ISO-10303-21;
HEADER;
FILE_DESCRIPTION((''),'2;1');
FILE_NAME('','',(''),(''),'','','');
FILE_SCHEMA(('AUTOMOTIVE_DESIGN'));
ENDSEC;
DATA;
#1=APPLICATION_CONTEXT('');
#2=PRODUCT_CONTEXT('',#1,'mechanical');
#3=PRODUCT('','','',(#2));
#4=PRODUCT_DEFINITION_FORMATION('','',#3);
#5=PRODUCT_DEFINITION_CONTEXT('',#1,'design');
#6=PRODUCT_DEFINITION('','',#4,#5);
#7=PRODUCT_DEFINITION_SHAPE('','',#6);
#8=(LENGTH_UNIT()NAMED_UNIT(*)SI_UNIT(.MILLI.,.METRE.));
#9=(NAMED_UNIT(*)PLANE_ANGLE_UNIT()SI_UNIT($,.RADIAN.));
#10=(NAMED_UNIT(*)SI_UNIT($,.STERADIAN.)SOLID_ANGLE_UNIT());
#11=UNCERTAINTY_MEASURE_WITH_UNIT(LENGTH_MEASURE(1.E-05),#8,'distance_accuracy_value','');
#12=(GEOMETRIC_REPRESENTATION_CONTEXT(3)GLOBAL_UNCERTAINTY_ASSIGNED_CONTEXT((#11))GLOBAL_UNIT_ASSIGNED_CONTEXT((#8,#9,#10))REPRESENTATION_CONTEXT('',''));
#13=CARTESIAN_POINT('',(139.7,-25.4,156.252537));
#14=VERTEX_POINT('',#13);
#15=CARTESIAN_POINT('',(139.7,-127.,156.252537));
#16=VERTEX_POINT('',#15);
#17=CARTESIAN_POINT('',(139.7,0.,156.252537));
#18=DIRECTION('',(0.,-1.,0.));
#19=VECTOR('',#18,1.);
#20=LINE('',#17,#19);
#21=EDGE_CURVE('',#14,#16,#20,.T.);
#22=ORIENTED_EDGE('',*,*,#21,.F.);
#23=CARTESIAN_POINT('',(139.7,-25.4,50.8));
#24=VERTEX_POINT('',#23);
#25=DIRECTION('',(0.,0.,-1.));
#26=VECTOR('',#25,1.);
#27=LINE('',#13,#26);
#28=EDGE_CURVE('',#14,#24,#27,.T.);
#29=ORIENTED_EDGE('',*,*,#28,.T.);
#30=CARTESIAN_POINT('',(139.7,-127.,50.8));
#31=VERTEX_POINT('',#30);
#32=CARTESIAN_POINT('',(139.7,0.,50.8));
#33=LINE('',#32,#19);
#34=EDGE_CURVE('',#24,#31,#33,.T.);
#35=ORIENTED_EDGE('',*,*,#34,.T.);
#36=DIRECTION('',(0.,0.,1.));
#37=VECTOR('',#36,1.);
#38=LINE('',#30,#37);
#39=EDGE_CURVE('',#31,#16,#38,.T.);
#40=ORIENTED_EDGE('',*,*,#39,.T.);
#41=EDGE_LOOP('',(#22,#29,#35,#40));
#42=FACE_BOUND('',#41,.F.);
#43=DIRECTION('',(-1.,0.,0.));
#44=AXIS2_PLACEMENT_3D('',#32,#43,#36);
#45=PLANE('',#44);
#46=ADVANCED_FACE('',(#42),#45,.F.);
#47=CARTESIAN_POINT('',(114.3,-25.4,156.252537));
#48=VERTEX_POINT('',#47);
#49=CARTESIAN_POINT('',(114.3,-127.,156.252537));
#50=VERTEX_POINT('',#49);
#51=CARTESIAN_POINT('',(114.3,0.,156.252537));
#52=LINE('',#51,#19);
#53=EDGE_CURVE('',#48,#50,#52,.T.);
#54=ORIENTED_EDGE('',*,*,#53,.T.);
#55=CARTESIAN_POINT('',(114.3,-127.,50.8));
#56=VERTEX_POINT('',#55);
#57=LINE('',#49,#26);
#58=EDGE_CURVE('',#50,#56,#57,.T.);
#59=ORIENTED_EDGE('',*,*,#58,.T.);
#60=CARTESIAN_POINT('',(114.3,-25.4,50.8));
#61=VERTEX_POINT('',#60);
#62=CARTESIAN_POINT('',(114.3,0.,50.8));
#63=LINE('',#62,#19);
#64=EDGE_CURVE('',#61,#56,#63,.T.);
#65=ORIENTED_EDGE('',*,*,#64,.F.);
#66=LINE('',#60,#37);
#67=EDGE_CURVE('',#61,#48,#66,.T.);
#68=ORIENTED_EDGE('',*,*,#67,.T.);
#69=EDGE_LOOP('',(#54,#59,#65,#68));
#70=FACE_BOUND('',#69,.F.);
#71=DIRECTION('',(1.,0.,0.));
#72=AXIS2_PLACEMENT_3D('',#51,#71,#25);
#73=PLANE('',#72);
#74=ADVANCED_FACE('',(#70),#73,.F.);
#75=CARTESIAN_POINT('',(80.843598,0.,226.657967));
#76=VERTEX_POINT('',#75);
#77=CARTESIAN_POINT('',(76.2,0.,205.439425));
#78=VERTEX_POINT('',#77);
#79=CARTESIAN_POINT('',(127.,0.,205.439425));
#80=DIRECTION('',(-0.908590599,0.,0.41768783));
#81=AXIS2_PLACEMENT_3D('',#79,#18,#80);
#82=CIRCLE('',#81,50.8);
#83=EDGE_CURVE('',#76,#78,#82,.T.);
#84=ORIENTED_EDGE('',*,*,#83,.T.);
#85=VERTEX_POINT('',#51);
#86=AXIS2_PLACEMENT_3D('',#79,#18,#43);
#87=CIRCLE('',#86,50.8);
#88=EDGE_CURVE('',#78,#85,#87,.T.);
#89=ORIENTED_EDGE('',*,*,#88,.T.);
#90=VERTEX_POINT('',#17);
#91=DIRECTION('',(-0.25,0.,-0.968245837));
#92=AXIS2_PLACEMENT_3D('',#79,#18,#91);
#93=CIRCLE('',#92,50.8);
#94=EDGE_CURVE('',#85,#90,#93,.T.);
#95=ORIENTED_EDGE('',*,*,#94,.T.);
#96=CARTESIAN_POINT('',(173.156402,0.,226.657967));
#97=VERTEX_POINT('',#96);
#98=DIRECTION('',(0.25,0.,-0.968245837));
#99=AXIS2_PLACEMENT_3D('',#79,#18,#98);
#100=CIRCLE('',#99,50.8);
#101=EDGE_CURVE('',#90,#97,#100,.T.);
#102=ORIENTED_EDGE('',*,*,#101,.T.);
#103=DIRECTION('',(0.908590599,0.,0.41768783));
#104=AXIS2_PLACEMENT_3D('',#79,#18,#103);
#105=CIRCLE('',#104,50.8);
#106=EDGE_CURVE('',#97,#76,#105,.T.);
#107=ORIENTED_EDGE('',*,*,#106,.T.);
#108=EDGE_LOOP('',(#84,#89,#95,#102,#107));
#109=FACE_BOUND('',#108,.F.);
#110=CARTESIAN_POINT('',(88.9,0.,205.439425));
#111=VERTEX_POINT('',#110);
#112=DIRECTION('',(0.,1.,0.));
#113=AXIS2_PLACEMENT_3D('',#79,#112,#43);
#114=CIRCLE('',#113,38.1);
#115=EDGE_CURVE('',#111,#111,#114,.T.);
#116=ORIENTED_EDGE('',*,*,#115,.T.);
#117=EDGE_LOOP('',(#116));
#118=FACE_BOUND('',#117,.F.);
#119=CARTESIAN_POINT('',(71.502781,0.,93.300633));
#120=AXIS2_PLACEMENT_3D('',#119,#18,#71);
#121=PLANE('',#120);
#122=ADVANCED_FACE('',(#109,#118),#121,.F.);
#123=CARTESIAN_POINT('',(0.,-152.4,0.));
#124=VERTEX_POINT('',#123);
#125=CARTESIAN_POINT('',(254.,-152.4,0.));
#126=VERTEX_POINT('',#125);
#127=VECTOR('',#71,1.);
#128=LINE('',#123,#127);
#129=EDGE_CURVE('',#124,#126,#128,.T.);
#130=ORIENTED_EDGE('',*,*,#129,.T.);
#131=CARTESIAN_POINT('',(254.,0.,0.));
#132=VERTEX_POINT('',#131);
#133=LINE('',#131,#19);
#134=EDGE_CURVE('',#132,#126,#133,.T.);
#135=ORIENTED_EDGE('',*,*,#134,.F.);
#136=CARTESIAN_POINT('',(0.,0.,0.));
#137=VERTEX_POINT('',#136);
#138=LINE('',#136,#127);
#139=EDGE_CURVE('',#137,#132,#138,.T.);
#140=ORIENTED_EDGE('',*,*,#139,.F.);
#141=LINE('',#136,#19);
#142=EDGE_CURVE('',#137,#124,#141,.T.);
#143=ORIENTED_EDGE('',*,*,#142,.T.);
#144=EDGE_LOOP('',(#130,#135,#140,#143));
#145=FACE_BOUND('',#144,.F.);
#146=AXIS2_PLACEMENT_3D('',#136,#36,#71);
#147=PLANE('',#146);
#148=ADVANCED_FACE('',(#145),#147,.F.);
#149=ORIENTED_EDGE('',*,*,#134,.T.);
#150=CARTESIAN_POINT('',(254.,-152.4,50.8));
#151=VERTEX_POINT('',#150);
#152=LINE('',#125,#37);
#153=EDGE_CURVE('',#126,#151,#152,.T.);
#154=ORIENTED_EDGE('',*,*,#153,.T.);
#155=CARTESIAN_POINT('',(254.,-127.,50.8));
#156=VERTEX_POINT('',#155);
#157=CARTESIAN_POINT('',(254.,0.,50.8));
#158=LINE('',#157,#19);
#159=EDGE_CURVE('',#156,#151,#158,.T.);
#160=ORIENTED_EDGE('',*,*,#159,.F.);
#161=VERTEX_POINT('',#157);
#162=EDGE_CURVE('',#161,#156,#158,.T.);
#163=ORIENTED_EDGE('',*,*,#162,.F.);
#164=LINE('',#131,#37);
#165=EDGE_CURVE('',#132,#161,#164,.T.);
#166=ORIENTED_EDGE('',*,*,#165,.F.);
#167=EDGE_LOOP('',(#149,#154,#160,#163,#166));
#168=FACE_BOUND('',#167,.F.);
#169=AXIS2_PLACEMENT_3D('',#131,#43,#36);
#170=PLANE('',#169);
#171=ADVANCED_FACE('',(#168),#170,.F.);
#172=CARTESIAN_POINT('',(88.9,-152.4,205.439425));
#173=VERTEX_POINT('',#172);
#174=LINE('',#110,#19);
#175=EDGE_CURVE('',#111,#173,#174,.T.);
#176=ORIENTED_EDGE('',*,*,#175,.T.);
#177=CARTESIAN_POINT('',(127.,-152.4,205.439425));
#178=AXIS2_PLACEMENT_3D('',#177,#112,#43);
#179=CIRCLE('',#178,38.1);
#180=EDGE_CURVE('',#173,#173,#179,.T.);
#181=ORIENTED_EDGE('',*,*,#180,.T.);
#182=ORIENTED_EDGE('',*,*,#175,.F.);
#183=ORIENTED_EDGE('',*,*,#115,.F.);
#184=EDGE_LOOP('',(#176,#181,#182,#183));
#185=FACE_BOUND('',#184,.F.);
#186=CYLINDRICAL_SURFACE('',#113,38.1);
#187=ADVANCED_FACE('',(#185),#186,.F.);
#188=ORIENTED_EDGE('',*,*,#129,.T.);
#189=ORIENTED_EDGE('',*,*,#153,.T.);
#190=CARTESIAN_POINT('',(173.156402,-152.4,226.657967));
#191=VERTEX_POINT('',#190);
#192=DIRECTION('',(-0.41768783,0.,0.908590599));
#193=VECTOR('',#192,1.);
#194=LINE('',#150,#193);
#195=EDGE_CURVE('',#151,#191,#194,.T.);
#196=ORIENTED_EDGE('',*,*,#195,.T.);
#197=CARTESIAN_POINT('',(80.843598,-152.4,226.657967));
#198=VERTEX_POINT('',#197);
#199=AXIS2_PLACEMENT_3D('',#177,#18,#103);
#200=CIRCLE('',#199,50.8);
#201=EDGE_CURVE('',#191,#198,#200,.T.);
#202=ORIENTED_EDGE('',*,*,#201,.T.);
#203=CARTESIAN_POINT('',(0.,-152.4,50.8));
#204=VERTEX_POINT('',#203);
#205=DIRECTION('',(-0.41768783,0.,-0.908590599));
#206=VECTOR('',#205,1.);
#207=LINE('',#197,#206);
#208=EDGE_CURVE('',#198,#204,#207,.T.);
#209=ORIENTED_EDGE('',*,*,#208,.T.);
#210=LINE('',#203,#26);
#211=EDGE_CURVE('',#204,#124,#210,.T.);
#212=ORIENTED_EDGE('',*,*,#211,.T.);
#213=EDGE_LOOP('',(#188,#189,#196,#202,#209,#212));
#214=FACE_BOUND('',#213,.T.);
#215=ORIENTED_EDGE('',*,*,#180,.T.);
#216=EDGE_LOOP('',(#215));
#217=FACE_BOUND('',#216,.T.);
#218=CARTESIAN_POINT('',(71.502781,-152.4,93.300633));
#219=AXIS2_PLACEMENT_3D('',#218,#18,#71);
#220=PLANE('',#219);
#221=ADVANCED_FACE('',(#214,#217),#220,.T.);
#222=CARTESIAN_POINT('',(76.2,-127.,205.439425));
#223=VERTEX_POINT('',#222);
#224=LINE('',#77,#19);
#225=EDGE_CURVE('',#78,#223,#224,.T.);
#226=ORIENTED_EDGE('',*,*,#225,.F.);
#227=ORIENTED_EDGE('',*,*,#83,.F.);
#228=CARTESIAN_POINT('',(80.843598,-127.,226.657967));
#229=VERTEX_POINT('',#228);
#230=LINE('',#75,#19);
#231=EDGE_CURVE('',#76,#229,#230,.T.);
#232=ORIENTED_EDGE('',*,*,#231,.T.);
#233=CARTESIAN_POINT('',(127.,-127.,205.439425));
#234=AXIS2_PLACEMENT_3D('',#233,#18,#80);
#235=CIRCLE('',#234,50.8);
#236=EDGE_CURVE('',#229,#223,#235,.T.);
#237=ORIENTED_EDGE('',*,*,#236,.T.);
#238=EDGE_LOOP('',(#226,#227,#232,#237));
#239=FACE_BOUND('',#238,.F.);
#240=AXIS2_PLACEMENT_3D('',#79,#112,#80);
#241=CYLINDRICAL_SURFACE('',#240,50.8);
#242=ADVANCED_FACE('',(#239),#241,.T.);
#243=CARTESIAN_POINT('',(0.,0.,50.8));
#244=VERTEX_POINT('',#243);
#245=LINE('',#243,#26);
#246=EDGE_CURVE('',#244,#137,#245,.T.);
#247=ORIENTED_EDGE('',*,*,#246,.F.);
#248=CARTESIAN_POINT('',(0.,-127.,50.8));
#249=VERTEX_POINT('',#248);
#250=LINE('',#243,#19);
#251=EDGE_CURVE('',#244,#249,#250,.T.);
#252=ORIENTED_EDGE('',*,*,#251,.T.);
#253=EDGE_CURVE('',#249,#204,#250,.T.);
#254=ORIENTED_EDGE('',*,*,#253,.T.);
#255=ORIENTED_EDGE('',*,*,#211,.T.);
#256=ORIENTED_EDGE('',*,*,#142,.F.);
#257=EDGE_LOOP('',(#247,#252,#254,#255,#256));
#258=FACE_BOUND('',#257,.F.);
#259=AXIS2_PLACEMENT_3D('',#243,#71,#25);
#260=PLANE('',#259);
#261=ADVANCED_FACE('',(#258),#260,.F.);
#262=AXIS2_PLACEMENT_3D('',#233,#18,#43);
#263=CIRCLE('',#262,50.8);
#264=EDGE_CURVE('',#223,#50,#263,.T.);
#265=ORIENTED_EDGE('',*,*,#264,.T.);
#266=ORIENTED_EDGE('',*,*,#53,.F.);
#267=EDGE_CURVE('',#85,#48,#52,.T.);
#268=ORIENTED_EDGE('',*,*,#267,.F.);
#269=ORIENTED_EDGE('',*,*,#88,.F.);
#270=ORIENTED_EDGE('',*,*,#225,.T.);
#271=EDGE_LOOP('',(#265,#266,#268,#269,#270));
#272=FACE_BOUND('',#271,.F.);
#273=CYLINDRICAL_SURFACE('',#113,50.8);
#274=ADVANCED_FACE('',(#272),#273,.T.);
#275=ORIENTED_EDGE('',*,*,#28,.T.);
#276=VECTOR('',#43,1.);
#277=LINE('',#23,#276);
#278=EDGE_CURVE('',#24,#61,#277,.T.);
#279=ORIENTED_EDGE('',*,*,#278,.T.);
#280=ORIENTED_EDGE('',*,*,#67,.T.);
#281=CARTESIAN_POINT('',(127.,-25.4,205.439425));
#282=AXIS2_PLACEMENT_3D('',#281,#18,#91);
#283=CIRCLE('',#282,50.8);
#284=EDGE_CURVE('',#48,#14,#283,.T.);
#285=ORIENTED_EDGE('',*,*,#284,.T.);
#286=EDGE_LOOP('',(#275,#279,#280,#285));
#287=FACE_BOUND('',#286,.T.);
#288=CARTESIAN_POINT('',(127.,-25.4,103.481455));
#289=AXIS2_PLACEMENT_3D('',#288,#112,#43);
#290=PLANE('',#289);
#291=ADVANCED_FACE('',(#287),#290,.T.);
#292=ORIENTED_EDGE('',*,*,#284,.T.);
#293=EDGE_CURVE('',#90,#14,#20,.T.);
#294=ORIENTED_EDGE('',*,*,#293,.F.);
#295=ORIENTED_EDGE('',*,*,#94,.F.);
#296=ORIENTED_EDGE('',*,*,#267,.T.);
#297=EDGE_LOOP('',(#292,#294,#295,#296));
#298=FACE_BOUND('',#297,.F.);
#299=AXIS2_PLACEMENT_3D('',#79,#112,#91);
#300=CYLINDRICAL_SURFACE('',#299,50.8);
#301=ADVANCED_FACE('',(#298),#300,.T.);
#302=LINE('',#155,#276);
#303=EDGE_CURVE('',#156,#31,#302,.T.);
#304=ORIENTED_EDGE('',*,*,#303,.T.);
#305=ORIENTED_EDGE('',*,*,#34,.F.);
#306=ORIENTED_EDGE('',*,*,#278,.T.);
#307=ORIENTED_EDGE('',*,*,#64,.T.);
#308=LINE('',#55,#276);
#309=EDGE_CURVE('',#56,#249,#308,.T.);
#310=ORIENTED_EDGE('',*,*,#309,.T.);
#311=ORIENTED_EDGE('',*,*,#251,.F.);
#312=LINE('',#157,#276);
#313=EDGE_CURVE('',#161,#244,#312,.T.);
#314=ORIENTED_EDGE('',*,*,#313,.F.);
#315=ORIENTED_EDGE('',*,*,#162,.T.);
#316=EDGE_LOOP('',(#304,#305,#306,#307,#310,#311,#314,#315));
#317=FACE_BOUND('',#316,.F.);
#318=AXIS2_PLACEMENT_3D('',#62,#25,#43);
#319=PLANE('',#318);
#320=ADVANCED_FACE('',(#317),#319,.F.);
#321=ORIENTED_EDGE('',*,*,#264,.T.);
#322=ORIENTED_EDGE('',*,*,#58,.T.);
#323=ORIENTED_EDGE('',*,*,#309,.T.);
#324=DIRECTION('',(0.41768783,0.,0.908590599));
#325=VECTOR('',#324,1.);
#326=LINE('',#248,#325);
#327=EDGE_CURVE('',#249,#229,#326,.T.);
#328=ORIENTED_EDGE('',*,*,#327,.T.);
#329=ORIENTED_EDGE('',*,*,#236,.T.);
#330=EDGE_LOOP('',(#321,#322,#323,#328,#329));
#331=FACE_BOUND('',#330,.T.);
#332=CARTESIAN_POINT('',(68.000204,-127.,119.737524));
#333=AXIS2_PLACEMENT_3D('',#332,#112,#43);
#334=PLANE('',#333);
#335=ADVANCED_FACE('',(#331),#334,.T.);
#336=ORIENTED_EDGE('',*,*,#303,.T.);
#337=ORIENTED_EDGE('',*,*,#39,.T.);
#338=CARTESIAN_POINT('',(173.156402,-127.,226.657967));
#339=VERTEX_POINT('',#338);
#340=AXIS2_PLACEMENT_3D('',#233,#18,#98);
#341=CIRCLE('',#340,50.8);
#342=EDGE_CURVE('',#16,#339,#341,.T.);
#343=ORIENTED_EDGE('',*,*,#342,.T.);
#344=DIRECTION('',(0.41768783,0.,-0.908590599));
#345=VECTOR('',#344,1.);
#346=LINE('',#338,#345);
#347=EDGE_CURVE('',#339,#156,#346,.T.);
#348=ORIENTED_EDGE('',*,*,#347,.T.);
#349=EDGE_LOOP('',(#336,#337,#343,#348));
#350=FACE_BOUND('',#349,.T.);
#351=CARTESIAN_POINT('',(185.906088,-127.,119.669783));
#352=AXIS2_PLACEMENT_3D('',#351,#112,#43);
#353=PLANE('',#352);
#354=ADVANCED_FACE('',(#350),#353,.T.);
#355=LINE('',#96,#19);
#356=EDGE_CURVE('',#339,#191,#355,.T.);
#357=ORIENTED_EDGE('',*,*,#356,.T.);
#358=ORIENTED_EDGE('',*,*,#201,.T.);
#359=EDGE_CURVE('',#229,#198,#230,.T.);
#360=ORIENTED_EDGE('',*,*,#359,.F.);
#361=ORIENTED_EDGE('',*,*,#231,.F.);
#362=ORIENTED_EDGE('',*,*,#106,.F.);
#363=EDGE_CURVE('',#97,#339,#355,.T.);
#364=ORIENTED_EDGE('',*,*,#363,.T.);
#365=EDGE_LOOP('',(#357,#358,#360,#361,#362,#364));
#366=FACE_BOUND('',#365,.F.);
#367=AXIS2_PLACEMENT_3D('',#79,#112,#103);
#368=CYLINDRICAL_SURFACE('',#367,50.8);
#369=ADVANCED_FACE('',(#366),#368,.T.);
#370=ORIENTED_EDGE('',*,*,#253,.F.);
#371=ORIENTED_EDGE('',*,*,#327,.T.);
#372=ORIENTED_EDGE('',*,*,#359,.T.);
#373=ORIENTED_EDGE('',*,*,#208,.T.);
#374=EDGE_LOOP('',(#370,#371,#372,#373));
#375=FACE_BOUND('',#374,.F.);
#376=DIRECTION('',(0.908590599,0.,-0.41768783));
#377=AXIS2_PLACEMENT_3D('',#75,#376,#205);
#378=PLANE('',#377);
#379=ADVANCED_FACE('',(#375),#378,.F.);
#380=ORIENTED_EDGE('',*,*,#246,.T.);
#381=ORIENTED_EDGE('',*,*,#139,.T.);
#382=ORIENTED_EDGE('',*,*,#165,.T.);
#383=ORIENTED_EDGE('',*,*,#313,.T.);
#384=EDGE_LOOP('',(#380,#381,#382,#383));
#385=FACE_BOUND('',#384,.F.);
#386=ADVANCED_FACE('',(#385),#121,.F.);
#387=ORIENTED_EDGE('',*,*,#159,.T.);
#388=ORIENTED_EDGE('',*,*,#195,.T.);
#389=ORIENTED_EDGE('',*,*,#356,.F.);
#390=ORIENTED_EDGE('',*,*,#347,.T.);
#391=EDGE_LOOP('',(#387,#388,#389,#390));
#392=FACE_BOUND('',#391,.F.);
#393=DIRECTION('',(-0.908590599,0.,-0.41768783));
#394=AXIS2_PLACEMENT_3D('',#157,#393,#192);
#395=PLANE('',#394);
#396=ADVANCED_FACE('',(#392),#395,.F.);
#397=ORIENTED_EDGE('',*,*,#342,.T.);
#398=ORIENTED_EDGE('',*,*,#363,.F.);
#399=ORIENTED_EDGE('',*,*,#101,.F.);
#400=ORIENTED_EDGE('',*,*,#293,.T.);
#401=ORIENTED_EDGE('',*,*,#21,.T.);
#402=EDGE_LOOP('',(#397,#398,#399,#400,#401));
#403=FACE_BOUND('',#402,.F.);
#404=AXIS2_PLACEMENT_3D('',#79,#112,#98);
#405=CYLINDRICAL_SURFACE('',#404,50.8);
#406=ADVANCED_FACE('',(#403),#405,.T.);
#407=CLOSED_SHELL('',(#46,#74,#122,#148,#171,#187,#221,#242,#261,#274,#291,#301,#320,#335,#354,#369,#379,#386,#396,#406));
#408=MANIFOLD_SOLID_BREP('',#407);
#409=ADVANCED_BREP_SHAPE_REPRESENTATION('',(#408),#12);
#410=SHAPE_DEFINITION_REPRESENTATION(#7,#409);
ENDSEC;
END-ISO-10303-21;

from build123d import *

# Parameters (mm, degrees)
F1_DEPTH = 152.4
F2_R     = 38.1
F3_DEPTH = 152.4
F5_DEPTH = 127
F7_DEPTH = 25.4


with BuildPart() as f1:
    # F0 (on Front) → F1 (new body)
    with BuildSketch(Plane.XZ):
        with BuildLine():
            Line((0, 50.8), (0, 0))
            Line((0, 0), (127, 0))
            Line((127, 0), (127, 154.6394254648))
            ThreePointArc((127, 154.6394254648), (84.2300226684, 178.0283138665), (80.8435975712, 226.6579672344))
            Line((80.8435975712, 226.6579672344), (0, 50.8))
        make_face()
        with BuildLine():
            Line((127, 154.6394254648), (127, 0))
            Line((127, 0), (254, 0))
            Line((254, 0), (254, 50.8))
            Line((254, 50.8), (173.1564024288, 226.6579672344))
            ThreePointArc((173.1564024288, 226.6579672344), (176.6255238934, 216.2997835762), (177.8, 205.4394254648))
            ThreePointArc((177.8, 205.4394254648), (162.9210244843, 169.5184009805), (127, 154.6394254648))
        make_face()
        with BuildLine():
            ThreePointArc((80.8435975712, 226.6579672344), (84.2300226684, 178.0283138665), (127, 154.6394254648))
            ThreePointArc((127, 154.6394254648), (162.9210244843, 169.5184009805), (177.8, 205.4394254648))
            ThreePointArc((177.8, 205.4394254648), (176.6255238934, 216.2997835762), (173.1564024288, 226.6579672344))
            ThreePointArc((173.1564024288, 226.6579672344), (127, 256.2394254648), (80.8435975712, 226.6579672344))
        make_face()
    extrude(amount=F1_DEPTH)

    # F2 (on face) → F3 (cut)
    with BuildSketch(Plane(origin=(0, 0, 0), x_dir=(-1, 0, 0), z_dir=(0, 1, 0))):
        with Locations((-127, 205.4394254648)):
            Circle(F2_R)
    extrude(amount=-F3_DEPTH, mode=Mode.SUBTRACT)

    # F4 (on face) → F5 (cut)
    with BuildSketch(Plane(origin=(0, 0, 0), x_dir=(-1, 0, 0), z_dir=(0, 1, 0))):
        with BuildLine():
            Line((-173.1564024288, 226.6579672344), (-254, 50.8))
            Line((-254, 50.8), (-139.7, 50.8))
            Line((-139.7, 50.8), (-139.7, 156.2525369679))
            ThreePointArc((-139.7, 156.2525369679), (-172.8830053448, 183.6359894848), (-173.1564024288, 226.6579672344))
        make_face()
        with BuildLine():
            Line((0, 50.8), (-80.8435975712, 226.6579672344))
            ThreePointArc((-80.8435975712, 226.6579672344), (-77.3744761066, 216.2997835762), (-76.2, 205.4394254648))
            ThreePointArc((-76.2, 205.4394254648), (-86.8390737159, 174.3309057314), (-114.3, 156.2525369679))
            Line((-114.3, 156.2525369679), (-114.3, 109.0697127324))
            Line((-114.3, 109.0697127324), (-114.3, 50.8))
            Line((-114.3, 50.8), (0, 50.8))
        make_face()
    extrude(amount=-F5_DEPTH, mode=Mode.SUBTRACT)

    # F6 (on face) → F7 (cut)
    with BuildSketch(Plane(origin=(0, 0, 0), x_dir=(-1, 0, 0), z_dir=(0, 1, 0))):
        with BuildLine():
            ThreePointArc((-114.3, 156.2525369679), (-127, 154.6394254648), (-139.7, 156.2525369679))
            Line((-139.7, 156.2525369679), (-139.7, 50.8))
            Line((-139.7, 50.8), (-114.3, 50.8))
            Line((-114.3, 50.8), (-114.3, 156.2525369679))
        make_face()
    extrude(amount=-F7_DEPTH, mode=Mode.SUBTRACT)


solid = f1.part
